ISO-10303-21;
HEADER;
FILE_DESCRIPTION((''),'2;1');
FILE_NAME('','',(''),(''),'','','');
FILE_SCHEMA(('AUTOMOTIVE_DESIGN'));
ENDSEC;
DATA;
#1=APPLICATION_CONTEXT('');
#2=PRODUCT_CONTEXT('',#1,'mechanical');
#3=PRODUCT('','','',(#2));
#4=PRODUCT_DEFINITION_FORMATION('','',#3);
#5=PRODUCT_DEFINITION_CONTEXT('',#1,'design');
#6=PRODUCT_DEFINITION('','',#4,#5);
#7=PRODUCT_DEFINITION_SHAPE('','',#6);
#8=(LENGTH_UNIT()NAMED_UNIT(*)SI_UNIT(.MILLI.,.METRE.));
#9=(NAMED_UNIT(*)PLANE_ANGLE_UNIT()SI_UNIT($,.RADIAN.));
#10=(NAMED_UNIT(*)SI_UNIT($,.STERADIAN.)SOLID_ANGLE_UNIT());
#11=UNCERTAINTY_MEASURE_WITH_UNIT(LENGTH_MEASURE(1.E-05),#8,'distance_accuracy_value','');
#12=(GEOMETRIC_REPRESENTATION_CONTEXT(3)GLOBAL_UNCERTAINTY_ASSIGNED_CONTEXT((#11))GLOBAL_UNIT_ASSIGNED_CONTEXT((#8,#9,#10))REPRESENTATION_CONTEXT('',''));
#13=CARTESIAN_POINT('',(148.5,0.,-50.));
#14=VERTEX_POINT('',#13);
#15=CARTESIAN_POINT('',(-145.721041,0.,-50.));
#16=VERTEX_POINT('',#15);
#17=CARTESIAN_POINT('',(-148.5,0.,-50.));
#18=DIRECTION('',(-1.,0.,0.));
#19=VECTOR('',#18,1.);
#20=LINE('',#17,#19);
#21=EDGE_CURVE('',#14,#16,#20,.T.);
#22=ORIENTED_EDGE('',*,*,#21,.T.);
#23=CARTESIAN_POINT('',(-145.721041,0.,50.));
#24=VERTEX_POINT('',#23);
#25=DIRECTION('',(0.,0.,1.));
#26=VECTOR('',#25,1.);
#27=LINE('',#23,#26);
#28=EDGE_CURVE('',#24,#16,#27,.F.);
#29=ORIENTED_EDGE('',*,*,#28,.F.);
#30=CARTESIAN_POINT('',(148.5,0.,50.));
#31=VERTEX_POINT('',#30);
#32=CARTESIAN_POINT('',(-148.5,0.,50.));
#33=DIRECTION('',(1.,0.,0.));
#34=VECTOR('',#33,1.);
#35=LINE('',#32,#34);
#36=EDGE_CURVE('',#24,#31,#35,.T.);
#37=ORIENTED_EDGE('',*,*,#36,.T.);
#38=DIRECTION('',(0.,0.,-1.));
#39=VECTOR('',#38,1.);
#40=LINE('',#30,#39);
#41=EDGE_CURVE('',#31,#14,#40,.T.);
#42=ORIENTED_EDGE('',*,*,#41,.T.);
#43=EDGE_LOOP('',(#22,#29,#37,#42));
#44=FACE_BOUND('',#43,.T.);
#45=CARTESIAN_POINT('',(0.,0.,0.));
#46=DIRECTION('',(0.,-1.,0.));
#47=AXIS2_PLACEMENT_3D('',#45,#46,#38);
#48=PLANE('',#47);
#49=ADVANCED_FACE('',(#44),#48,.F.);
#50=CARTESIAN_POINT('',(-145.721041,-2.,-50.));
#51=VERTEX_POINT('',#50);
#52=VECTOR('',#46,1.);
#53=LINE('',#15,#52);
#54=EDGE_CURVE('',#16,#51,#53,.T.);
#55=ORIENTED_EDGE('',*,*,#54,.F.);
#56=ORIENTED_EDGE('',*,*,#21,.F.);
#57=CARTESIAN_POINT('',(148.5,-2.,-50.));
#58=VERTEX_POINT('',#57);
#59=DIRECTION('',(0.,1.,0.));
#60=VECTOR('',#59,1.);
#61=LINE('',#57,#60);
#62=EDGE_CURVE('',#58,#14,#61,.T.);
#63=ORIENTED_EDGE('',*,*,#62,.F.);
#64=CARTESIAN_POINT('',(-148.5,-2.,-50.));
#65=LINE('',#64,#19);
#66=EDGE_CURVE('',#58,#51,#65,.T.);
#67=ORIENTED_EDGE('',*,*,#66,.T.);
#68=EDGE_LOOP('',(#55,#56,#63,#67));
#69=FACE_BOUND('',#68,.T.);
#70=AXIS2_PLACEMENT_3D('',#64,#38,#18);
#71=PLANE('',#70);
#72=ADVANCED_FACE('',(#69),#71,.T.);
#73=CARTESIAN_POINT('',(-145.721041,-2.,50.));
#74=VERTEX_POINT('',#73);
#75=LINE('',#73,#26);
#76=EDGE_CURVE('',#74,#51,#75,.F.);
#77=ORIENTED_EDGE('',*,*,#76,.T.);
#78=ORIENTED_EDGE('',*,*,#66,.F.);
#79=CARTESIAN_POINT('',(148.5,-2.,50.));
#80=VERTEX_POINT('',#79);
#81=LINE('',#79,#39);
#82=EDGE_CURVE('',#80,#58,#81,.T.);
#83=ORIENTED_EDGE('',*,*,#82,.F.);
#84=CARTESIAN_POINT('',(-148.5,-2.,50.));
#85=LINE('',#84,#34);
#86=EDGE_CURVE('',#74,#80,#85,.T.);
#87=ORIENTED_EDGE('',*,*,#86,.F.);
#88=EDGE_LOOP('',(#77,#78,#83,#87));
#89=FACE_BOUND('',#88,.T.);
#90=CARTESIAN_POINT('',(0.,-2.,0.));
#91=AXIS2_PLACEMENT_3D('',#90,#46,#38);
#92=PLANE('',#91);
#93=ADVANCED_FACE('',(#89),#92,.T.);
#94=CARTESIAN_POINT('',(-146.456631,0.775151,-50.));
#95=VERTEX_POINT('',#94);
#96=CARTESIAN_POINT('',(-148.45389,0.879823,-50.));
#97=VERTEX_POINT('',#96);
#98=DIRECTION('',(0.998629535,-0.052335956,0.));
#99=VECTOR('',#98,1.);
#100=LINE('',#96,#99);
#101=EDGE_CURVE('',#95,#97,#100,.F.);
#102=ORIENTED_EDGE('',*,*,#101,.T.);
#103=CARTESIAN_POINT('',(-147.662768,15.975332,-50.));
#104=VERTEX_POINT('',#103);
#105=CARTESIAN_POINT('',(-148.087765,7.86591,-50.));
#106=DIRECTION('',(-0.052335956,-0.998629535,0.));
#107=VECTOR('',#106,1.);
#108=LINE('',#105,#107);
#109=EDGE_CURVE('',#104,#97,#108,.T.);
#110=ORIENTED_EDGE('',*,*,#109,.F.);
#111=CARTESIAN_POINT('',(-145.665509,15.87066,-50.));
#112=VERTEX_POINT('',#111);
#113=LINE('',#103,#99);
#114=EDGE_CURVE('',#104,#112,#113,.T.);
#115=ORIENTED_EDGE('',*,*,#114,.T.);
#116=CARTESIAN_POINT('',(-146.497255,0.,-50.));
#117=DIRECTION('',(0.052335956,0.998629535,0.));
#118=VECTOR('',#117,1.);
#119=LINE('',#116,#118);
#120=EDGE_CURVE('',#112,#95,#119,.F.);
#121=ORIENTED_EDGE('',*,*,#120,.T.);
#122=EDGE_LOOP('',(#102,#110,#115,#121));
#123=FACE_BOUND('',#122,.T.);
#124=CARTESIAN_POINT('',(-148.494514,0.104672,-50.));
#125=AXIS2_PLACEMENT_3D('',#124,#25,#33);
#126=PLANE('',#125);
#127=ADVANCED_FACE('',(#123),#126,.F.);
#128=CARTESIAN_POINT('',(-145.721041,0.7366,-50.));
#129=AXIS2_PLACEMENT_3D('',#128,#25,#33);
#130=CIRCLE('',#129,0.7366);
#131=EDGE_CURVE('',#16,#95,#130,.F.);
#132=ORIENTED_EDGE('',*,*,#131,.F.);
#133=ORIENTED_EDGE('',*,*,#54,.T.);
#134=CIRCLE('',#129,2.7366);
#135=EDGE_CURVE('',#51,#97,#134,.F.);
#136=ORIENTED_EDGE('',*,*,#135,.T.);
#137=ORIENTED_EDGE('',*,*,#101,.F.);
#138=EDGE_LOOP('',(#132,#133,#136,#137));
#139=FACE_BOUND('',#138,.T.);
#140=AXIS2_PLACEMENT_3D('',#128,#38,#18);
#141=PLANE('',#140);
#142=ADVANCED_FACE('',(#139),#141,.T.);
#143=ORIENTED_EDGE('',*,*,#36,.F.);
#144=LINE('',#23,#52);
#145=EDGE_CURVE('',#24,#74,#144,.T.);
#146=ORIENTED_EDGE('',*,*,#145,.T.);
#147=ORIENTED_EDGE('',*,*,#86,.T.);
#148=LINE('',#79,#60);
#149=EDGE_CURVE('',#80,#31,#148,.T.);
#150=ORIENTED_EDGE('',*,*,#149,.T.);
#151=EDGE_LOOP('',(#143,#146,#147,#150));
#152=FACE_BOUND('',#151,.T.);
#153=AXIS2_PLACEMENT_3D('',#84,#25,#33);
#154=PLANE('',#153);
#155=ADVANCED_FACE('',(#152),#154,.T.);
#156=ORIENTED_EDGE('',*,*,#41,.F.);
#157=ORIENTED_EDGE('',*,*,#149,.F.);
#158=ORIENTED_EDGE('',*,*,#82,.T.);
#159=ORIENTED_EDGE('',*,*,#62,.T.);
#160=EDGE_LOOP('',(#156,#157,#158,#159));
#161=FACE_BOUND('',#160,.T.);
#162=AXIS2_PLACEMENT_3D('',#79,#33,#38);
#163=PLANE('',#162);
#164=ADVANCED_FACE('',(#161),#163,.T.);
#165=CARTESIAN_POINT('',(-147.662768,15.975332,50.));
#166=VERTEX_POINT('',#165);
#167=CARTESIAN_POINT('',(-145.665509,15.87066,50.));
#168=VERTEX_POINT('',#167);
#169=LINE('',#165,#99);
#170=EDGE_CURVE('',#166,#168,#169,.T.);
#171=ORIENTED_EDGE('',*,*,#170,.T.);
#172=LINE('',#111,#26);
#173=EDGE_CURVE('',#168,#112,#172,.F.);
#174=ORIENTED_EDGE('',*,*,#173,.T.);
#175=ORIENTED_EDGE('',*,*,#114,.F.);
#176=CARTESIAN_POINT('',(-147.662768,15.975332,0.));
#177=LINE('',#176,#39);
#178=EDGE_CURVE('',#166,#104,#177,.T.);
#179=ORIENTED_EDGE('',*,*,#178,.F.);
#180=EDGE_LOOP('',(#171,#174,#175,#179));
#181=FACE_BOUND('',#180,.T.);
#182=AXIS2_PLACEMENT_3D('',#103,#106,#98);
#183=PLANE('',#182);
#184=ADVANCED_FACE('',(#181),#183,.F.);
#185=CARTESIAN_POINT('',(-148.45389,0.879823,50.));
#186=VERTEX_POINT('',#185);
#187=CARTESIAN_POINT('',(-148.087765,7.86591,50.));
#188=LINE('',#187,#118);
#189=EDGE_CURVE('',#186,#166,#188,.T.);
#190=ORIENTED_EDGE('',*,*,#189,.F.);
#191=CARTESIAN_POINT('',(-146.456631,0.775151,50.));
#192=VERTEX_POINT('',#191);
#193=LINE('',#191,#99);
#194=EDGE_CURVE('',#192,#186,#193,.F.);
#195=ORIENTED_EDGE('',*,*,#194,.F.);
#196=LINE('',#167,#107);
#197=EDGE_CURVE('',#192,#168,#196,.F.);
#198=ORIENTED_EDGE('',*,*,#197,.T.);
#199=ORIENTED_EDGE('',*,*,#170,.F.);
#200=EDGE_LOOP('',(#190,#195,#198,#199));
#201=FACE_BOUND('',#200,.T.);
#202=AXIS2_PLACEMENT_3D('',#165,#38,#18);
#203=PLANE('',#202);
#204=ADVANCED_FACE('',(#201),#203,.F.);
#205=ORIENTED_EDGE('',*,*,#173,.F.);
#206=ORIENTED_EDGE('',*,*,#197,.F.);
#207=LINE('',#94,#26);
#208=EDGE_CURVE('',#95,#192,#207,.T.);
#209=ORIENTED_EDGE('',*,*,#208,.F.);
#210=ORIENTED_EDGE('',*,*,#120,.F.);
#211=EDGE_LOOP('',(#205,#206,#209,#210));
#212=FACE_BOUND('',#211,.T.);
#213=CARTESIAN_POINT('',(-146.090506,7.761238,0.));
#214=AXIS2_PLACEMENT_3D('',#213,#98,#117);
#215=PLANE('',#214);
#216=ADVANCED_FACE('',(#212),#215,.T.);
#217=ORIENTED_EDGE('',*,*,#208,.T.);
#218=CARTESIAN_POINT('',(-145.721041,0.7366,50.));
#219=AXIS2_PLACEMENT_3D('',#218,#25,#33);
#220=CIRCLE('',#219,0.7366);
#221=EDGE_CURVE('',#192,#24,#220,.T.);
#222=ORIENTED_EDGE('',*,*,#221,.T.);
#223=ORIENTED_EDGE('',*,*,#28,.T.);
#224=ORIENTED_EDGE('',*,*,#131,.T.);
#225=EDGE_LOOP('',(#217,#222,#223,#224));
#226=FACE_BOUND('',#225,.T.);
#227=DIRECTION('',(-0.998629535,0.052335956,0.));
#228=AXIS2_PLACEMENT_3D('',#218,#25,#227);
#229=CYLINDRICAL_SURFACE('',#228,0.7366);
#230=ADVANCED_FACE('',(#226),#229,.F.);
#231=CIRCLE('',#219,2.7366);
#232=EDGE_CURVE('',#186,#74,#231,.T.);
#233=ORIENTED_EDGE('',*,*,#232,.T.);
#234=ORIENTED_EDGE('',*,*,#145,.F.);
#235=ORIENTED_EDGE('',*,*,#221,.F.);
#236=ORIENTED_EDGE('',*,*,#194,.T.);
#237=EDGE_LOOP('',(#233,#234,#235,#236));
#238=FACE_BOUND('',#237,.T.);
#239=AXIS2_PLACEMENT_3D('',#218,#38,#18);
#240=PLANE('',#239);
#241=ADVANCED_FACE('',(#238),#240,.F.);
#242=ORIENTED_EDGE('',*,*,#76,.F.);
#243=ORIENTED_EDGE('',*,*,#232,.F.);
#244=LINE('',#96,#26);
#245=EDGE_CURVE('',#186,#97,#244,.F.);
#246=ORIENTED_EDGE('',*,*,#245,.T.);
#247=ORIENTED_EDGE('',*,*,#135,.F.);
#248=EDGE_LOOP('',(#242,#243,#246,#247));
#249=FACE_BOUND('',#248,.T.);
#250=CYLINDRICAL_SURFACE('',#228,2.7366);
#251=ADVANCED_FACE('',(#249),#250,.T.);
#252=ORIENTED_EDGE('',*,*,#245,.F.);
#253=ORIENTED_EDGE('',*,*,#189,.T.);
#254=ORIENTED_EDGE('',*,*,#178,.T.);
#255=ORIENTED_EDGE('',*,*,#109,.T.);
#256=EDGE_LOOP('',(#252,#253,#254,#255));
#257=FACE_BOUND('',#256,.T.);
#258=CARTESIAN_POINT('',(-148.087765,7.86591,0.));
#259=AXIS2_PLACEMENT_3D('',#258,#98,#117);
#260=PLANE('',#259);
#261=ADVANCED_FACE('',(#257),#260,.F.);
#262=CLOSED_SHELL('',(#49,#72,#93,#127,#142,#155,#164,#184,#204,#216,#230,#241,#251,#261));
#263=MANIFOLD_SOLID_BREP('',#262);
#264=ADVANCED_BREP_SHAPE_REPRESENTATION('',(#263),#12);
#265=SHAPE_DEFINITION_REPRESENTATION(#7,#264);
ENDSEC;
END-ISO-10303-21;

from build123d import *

# Parameters (mm, degrees)
SKETCH1_W            = 297
SKETCH1_H            = 100
BASE_FLANGE1_DEPTH   = 2
EDGE_FLANGE1_START   = -50
EDGE_FLANGE1_DEPTH   = 100
EDGE_FLANGE1_2_DEPTH = 100


# Read off the part's stored shape, not the designer's step: Edge-Flange1
# Sheet-metal steps are written as plain solids
with BuildPart() as part:
    # Sketch1 → Base-Flange1 (new body)
    with BuildSketch(Plane(origin=(0, 0, 0), x_dir=(1, 0, 0), z_dir=(0, 1, 0))):
        Rectangle(SKETCH1_W, SKETCH1_H)
    extrude(amount=-BASE_FLANGE1_DEPTH)

    # Edge-Flange1 outline → Edge-Flange1 (cut)
    with BuildSketch(Plane.XY.offset(EDGE_FLANGE1_START)):
        with BuildLine():
            ThreePointArc((-145.721040868, -2), (-147.375308077, -1.443395312), (-148.356643266, 0))
            Line((-148.356643266, 0), (-148.5, 0))
            Line((-148.5, 0), (-148.5, -2))
            Line((-148.5, -2), (-145.721040868, -2))
        make_face()
    extrude(amount=EDGE_FLANGE1_DEPTH, mode=Mode.SUBTRACT)

    # Edge-Flange1 2 outline → Edge-Flange1 2 (add)
    with BuildSketch(Plane.XY.offset(EDGE_FLANGE1_START)):
        with BuildLine():
            Line((-147.662768346, 15.975331626), (-148.453890453, 0.879822578))
            ThreePointArc((-148.453890453, 0.879822578), (-148.441075999, 0.435953289), (-148.356643266, 0))
            Line((-148.356643266, 0), (-145.721040868, 0))
            ThreePointArc((-145.721040868, 0), (-146.255351629, 0.22955802), (-146.456631383, 0.775150665))
            Line((-146.456631383, 0.775150665), (-145.665509277, 15.870659713))
            Line((-145.665509277, 15.870659713), (-147.662768346, 15.975331626))
        make_face()
    extrude(amount=EDGE_FLANGE1_2_DEPTH)


solid = part.part
